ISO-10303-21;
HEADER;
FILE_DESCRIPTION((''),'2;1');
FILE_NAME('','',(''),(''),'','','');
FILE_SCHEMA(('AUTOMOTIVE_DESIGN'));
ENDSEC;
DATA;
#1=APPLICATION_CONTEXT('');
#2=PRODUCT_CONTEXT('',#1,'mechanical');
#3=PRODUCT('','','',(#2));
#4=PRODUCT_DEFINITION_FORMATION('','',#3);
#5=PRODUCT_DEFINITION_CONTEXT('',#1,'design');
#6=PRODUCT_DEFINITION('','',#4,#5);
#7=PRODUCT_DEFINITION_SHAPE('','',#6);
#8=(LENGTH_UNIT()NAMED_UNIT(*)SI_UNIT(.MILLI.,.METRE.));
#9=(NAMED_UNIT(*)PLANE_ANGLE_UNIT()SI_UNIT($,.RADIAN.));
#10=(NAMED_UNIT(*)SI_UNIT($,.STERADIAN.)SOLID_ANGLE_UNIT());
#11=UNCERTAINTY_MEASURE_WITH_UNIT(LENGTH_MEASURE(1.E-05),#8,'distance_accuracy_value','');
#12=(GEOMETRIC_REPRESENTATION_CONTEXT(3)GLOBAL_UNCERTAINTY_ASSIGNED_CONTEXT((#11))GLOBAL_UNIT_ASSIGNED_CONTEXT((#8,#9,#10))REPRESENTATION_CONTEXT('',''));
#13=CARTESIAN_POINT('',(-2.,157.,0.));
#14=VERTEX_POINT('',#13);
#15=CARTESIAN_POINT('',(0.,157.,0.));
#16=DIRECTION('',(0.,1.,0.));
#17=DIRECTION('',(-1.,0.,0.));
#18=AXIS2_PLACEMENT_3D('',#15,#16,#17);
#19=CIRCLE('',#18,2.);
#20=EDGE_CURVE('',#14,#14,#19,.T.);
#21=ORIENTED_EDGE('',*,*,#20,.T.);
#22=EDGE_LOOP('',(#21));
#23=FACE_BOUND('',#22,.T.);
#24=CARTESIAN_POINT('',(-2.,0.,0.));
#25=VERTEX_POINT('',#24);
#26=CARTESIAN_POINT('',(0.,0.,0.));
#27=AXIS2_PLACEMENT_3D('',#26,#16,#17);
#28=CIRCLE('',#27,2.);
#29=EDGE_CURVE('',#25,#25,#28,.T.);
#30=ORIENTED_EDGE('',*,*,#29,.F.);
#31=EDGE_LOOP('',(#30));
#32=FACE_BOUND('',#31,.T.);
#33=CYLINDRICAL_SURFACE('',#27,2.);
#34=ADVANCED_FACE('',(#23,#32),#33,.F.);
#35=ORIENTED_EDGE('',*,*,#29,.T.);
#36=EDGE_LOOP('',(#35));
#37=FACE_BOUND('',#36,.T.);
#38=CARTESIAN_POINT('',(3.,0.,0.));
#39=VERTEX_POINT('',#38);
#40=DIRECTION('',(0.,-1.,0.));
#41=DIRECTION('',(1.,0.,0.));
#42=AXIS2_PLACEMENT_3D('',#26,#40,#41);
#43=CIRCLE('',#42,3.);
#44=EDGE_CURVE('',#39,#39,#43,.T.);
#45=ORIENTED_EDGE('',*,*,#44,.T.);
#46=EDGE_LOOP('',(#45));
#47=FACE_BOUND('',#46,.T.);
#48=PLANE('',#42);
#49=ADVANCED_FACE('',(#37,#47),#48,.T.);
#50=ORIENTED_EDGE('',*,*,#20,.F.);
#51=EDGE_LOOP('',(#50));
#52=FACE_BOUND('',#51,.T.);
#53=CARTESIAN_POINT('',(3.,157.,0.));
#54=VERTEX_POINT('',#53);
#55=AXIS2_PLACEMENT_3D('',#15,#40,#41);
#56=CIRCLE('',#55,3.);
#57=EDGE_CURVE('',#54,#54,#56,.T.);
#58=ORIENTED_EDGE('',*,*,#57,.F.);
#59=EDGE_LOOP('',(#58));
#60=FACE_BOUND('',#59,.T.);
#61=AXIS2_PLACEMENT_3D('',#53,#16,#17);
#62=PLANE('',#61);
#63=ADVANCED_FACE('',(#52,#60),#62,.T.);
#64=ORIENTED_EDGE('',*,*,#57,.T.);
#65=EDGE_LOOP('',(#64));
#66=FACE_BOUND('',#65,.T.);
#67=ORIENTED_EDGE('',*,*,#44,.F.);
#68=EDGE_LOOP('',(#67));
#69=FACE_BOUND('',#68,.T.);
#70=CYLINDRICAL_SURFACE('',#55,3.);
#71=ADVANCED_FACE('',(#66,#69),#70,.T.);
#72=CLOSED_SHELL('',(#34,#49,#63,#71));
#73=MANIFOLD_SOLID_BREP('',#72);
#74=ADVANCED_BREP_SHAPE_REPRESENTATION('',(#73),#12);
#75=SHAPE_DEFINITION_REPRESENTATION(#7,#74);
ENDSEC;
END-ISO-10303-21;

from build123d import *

# Parameters (mm, degrees)
SKETCH1_W          = 3
SKETCH1_H          = 157
SKETCH3_R          = 2
CUT_EXTRUDE1_DEPTH = 158.097591383


with BuildPart() as part:
    # Sketch1 → Revolve1 (revolve)
    with BuildSketch(Plane.XY.offset(1.653301878)):
        with Locations((1.5, -78.5)):
            Rectangle(SKETCH1_W, SKETCH1_H)
    revolve(axis=Axis((0, 0, 1.653301878), (0, -1, 0)))

    # Sketch3 → Cut-Extrude1 (cut, through all)
    with BuildSketch(Plane(origin=(0, 0, 0), x_dir=(1, 0, 0), z_dir=(0, 1, 0))):
        with Locations(Location((0, -1.653301878, 0), (0, 0, 180))):
            Circle(SKETCH3_R)
    extrude(amount=-CUT_EXTRUDE1_DEPTH, mode=Mode.SUBTRACT)


with BuildPart() as part_1:
    # Body-Move/Copy1: read off the stored shape, not the designer's step
    # Body-Move/Copy1: moved
    add(part.part.moved(Location((0, 157, -1.6533019))))


solid = part_1.part
